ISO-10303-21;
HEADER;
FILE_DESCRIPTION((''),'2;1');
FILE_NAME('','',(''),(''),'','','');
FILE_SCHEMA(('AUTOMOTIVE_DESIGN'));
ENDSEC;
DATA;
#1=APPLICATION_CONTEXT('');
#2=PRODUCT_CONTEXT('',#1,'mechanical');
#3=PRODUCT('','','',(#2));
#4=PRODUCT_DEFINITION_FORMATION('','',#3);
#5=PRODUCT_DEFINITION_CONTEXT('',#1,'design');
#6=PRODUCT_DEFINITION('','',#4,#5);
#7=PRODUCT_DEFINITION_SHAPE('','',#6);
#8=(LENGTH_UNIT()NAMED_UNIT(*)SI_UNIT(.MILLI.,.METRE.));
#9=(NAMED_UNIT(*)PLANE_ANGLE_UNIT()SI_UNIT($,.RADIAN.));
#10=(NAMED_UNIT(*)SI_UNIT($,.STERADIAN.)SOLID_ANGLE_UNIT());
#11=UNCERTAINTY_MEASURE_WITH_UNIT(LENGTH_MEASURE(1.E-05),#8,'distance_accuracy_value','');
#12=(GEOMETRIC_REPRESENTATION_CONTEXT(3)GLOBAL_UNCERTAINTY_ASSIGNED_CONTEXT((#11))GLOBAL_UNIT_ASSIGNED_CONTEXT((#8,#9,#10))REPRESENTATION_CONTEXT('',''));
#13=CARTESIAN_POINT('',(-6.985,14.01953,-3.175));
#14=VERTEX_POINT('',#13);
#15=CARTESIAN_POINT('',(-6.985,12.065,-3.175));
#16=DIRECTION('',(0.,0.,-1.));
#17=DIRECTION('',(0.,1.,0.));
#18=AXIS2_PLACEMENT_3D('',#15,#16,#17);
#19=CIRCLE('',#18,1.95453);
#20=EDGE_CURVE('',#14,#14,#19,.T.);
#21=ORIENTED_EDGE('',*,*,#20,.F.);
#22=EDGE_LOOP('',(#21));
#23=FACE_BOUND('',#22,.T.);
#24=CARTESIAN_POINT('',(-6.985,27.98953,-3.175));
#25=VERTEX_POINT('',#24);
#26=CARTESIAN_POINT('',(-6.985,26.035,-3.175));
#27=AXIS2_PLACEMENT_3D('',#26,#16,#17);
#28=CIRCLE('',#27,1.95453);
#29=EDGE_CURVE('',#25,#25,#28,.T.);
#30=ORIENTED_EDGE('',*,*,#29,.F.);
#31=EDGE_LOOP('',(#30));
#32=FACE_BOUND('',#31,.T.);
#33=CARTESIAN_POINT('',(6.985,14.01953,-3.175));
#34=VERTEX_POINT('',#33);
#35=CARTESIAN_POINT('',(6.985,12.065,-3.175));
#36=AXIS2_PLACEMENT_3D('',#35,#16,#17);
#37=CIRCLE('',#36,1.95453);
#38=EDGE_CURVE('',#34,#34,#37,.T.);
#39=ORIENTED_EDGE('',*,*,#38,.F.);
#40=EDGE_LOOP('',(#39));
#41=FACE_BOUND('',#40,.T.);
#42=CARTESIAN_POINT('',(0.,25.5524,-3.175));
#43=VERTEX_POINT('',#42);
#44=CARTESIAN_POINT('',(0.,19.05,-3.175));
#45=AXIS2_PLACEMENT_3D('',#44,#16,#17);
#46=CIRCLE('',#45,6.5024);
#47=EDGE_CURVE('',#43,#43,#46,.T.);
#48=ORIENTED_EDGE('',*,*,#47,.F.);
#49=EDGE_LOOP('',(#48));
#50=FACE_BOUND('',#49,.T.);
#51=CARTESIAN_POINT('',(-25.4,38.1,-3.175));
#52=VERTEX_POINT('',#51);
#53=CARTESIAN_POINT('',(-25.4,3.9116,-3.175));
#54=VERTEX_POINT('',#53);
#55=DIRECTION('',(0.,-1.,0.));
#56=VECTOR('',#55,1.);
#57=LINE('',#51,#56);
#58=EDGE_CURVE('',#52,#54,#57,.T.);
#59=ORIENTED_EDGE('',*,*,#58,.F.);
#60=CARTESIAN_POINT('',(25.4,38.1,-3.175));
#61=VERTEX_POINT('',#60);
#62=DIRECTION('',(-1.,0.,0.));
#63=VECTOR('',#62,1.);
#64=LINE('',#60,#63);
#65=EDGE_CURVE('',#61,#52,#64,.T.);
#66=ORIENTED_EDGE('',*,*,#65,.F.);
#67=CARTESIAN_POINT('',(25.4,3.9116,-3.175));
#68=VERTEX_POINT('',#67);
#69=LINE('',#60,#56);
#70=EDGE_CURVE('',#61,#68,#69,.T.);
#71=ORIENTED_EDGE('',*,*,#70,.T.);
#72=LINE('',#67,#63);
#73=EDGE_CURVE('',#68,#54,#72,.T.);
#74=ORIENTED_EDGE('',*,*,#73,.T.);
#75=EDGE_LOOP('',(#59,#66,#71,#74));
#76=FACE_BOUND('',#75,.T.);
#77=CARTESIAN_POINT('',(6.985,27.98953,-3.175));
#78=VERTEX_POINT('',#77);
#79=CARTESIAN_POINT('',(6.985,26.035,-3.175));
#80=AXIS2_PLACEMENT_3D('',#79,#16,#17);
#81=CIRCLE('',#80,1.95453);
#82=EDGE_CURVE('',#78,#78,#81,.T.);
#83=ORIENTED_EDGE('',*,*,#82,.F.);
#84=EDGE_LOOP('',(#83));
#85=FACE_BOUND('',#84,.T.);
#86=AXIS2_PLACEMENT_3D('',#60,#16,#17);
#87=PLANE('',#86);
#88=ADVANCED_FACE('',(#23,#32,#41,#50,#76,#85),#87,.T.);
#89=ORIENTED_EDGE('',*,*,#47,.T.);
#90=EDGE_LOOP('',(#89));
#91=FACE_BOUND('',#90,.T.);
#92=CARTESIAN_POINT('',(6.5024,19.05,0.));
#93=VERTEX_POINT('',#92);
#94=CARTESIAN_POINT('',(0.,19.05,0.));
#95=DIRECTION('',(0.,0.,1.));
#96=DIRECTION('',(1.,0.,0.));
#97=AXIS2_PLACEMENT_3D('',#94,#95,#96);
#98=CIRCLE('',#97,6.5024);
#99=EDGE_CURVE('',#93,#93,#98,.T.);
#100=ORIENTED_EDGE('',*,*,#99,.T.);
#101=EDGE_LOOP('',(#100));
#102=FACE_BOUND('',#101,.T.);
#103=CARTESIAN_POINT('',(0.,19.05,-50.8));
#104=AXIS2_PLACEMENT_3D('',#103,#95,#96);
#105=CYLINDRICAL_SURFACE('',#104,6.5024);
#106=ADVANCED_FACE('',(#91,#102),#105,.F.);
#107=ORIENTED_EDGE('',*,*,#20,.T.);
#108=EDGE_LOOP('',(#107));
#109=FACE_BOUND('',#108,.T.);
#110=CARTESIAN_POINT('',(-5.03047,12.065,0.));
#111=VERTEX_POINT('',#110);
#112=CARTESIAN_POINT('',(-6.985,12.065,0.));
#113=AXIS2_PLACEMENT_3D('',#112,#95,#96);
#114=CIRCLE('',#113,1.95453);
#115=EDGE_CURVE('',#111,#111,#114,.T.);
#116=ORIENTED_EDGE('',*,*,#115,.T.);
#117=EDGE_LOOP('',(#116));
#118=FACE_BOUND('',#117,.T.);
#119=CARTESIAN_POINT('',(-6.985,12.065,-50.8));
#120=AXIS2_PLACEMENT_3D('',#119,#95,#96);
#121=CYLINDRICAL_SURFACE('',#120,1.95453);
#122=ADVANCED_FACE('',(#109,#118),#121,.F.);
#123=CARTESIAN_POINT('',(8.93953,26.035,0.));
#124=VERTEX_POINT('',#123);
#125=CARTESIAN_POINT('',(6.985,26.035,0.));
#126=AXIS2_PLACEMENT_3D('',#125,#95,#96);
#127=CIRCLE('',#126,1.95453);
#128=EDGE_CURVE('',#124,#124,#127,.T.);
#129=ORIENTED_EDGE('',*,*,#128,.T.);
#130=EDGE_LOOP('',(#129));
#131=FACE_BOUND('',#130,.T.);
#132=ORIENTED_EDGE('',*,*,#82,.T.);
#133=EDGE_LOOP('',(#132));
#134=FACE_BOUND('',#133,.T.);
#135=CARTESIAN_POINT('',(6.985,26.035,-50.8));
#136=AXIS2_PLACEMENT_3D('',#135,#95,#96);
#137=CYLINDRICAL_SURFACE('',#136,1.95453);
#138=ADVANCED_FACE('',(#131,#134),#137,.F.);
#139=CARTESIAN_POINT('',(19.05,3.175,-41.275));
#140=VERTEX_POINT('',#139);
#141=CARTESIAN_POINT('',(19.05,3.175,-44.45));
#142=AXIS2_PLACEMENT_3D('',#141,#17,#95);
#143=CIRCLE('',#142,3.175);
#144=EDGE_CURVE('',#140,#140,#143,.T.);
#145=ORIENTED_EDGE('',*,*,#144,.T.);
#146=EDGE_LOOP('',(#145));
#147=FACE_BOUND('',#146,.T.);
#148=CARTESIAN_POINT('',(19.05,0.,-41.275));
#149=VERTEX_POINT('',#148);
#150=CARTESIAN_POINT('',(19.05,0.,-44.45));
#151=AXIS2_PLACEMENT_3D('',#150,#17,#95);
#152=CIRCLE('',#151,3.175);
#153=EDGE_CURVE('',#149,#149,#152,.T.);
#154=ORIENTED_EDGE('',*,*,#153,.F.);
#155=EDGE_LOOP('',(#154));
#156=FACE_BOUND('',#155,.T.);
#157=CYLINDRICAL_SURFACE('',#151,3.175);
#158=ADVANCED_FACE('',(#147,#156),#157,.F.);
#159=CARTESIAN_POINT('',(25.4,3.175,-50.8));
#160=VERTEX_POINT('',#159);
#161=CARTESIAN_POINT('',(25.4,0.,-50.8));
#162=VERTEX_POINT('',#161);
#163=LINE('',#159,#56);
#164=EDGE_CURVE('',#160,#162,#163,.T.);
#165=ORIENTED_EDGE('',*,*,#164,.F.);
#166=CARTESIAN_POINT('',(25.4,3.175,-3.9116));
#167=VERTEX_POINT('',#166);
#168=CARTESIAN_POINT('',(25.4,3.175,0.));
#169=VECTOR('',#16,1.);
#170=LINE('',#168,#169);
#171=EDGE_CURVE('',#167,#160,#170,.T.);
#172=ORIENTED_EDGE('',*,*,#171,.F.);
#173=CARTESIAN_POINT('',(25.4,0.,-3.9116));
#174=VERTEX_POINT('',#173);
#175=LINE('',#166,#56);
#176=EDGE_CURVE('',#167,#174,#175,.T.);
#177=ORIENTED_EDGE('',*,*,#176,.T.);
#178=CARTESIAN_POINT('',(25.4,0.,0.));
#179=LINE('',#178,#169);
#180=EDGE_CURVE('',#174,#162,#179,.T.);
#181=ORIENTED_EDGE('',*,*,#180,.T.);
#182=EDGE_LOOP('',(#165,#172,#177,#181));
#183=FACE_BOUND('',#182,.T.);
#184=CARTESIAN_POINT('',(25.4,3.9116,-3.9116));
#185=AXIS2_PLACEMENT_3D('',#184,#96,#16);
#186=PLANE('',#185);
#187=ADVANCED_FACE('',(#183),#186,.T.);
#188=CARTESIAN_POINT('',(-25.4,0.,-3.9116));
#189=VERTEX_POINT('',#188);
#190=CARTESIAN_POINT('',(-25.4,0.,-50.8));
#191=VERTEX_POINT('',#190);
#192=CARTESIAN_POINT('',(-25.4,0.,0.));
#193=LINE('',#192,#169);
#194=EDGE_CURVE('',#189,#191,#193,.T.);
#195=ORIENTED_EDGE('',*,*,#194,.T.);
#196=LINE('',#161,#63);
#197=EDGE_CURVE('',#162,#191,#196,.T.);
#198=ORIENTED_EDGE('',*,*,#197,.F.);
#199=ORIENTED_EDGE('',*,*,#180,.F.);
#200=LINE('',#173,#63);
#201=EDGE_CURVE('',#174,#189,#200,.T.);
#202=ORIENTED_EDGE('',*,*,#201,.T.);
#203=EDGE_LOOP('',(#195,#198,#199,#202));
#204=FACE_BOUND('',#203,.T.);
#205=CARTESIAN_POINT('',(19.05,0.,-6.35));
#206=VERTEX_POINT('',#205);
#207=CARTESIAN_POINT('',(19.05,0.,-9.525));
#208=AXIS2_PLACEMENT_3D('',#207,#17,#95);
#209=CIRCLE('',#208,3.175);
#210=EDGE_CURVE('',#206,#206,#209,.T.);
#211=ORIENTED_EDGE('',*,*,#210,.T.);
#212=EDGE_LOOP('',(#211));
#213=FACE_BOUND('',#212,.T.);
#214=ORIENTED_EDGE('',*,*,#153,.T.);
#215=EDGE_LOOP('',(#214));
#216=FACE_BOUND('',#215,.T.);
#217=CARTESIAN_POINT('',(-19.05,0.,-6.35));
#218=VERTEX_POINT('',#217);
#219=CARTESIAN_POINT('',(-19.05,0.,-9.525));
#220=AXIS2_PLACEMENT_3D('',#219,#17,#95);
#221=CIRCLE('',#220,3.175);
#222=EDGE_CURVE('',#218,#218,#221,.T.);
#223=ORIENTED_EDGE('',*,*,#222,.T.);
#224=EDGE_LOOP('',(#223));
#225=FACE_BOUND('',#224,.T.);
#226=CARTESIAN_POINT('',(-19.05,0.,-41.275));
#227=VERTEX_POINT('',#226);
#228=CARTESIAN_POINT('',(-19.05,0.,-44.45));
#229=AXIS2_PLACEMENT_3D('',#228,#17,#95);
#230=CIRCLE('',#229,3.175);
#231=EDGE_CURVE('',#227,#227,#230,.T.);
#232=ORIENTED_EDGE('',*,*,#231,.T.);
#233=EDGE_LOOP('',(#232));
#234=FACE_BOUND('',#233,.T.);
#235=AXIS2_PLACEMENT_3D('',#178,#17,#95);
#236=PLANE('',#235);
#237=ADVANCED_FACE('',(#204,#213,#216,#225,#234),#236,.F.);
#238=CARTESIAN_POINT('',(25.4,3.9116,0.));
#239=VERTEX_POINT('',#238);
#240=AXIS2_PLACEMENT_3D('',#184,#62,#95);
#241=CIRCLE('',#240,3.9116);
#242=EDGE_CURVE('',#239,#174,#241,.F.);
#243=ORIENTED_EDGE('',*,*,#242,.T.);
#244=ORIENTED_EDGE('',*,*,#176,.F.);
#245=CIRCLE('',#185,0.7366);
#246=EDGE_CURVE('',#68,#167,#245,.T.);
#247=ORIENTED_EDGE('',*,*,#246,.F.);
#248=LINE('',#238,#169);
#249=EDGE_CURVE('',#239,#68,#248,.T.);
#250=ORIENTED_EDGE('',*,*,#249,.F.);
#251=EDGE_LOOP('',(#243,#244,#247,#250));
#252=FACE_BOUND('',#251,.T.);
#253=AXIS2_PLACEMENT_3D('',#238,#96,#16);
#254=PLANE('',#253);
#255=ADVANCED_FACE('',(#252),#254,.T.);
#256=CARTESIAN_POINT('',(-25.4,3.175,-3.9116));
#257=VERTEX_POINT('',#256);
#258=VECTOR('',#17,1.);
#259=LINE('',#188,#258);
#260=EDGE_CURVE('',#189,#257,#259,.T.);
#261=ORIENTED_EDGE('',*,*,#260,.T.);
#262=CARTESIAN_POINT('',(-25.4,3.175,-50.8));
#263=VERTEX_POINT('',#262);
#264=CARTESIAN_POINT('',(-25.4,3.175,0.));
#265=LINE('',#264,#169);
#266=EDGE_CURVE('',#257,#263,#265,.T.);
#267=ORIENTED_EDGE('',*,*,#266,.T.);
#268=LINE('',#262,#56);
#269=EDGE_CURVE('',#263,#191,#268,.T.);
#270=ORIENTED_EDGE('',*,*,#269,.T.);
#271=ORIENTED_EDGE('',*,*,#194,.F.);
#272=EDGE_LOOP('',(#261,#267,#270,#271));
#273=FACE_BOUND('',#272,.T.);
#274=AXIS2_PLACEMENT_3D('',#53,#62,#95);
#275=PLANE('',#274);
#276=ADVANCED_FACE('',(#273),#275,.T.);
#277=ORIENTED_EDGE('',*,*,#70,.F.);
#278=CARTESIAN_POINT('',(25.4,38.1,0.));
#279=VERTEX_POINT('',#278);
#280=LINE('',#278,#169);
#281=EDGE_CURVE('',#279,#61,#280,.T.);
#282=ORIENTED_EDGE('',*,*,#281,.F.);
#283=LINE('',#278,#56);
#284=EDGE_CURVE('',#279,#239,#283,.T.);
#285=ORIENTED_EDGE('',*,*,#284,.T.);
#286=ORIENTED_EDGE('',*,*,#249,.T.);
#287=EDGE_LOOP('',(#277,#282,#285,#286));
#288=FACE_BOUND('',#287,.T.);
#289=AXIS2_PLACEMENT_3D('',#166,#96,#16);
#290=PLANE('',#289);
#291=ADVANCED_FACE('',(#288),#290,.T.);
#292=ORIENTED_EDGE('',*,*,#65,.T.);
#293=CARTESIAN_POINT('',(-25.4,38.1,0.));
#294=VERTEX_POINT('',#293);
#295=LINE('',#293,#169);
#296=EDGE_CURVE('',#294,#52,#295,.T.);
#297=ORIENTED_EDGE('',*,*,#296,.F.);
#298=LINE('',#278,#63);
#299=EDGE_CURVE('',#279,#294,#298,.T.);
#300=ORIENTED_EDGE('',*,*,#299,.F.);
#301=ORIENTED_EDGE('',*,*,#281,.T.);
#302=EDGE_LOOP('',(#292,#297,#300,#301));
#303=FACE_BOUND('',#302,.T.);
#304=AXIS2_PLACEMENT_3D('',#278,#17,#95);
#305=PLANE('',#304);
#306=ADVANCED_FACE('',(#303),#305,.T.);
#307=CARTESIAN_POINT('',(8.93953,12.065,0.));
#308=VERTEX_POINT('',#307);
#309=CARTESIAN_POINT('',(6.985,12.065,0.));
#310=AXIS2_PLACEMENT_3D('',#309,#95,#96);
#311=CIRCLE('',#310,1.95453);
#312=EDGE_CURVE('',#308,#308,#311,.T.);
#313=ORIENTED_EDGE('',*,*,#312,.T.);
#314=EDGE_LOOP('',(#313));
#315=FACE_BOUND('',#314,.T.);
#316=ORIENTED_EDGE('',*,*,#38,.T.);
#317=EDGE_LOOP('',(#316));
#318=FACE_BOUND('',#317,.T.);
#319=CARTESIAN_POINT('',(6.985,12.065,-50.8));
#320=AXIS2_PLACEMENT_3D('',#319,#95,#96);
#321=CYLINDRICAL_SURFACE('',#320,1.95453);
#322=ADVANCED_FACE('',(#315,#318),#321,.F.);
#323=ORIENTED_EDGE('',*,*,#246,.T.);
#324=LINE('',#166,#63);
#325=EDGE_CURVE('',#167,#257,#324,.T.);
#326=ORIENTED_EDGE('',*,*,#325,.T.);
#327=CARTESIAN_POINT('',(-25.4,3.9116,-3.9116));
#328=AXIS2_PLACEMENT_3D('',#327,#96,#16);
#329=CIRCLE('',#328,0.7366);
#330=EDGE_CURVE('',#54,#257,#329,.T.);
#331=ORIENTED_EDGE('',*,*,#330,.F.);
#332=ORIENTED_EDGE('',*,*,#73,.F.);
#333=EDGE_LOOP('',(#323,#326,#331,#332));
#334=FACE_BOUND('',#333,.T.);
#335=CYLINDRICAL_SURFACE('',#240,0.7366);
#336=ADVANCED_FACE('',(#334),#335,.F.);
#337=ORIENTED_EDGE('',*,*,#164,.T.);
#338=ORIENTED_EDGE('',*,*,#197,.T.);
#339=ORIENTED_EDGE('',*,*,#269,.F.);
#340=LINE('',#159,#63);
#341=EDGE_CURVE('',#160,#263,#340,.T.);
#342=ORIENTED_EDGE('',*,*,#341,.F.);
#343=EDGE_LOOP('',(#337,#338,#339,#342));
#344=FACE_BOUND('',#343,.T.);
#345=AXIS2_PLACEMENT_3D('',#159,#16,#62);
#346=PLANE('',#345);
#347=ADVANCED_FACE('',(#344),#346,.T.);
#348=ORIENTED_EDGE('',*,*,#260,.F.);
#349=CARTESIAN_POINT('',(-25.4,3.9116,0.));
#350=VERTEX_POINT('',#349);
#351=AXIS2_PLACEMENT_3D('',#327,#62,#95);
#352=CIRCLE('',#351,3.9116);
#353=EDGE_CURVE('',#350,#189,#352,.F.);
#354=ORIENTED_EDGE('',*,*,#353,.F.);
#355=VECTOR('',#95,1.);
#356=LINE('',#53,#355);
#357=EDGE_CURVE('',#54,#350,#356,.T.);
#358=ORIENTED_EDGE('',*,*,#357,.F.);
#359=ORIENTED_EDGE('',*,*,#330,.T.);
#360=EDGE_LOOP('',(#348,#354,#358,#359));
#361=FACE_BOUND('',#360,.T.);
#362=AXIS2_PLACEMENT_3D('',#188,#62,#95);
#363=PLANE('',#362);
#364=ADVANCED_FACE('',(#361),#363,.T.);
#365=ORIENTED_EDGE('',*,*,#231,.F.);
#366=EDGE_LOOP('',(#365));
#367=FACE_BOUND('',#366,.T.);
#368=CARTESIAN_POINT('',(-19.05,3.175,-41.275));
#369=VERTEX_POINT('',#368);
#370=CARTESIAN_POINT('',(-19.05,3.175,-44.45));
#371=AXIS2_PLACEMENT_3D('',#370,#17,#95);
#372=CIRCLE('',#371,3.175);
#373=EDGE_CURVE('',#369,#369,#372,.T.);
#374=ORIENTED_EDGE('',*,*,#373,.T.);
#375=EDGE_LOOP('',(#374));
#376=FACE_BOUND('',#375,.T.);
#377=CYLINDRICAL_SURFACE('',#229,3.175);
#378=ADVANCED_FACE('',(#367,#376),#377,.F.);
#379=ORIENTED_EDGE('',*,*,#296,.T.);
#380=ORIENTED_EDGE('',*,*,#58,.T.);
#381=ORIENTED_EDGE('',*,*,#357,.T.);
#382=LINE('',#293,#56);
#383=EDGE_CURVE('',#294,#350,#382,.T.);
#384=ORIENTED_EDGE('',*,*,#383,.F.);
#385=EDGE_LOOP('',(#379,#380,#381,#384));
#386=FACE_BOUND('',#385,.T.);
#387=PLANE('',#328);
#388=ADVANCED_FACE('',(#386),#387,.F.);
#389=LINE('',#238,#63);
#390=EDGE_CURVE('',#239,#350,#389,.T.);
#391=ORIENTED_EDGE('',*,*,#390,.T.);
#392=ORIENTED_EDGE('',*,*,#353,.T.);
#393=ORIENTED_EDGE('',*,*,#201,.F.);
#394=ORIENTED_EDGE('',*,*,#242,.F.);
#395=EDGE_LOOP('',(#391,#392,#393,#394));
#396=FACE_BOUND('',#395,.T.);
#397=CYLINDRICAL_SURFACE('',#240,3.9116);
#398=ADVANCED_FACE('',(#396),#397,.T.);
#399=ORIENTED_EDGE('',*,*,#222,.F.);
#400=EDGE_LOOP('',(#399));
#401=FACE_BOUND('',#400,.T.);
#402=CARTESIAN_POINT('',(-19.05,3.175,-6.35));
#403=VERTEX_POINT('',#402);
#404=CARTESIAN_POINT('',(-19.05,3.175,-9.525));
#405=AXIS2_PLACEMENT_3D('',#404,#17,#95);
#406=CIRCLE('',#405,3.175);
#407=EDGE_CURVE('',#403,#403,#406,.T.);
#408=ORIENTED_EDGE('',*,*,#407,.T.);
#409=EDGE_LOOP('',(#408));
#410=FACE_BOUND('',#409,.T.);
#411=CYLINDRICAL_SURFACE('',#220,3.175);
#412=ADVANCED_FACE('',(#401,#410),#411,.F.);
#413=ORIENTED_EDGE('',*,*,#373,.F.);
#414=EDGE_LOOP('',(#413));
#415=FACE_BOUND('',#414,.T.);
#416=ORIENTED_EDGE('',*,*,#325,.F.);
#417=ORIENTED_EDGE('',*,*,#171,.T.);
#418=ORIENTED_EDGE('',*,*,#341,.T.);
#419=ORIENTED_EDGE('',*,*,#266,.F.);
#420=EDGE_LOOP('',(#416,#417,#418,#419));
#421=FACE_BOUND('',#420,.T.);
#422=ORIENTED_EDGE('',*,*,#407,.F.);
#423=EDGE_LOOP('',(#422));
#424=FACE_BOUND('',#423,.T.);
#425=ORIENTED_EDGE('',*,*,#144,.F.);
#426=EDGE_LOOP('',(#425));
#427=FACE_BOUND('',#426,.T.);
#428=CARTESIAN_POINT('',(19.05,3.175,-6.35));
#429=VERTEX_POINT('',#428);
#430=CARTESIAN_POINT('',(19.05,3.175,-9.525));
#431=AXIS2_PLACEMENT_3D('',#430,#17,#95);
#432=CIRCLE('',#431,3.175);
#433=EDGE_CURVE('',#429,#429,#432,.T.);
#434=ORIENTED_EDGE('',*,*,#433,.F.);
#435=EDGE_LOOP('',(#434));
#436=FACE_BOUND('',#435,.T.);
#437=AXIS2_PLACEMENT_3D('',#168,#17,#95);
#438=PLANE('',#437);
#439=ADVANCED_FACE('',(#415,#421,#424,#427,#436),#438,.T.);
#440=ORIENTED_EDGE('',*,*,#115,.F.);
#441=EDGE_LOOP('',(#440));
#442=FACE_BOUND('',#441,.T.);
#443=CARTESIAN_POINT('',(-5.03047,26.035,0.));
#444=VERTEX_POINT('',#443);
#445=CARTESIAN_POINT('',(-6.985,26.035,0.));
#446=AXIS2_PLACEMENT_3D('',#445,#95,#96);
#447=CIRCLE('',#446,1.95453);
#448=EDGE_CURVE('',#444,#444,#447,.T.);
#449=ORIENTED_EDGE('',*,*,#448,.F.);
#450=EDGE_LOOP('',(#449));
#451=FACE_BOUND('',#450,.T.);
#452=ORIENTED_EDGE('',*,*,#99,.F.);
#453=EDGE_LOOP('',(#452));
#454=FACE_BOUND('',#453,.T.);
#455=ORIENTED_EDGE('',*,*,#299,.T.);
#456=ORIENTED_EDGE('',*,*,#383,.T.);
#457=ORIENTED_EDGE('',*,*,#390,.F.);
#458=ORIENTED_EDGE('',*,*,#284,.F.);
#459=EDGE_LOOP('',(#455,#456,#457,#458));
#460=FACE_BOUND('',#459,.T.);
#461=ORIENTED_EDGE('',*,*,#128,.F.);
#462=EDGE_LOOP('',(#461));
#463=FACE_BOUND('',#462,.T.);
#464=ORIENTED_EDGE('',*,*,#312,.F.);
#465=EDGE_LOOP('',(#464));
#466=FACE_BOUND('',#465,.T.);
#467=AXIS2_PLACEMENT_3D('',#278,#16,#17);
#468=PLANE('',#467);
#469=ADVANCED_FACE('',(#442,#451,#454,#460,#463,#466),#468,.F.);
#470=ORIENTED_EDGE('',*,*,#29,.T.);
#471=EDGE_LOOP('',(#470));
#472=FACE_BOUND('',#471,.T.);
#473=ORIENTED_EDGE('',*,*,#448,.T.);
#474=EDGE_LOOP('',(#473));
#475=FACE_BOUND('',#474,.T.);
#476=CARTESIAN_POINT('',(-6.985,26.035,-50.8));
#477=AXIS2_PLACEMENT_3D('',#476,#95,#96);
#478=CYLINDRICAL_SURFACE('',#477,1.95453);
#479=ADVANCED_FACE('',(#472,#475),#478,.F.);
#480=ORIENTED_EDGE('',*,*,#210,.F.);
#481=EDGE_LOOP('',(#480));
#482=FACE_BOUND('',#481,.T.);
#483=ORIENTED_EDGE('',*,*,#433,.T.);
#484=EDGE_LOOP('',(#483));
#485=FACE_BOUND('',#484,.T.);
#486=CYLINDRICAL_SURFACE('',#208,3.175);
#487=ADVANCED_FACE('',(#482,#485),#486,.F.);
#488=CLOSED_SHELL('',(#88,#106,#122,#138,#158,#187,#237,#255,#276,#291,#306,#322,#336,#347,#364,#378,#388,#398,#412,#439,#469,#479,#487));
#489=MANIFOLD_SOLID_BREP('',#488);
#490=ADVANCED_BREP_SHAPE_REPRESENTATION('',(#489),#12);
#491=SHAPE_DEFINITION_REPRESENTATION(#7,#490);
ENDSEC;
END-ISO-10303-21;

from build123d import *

# Parameters (mm, degrees)
BASE_FLANGE1_DEPTH = 25.4
SKETCH6_R          = 6.5024
SKETCH6_R_2        = 1.95453
CUT_EXTRUDE1_DEPTH = 69.391593051
SKETCH7_R          = 3.175
CUT_EXTRUDE2_DEPTH = 67.675


# Sheet-metal steps are written as plain solids
with BuildPart() as part:
    # Sketch1 → Base-Flange1 (new, symmetric)
    with BuildSketch(Plane(origin=(0, 0, 0), x_dir=(0, 0, -1), z_dir=(1, 0, 0))):
        with BuildLine():
            Line((0, 38.1), (0, 3.9116))
            ThreePointArc((0, 3.9116), (1.145681115, 1.145681115), (3.9116, 0))
            Line((3.9116, 0), (50.8, 0))
            Line((50.8, 0), (50.8, 3.175))
            Line((50.8, 3.175), (3.9116, 3.175))
            ThreePointArc((3.9116, 3.175), (3.390745145, 3.390745145), (3.175, 3.9116))
            Line((3.175, 3.9116), (3.175, 38.1))
            Line((3.175, 38.1), (0, 38.1))
        make_face()
    extrude(amount=BASE_FLANGE1_DEPTH, both=True)

    # Sketch6 → Cut-Extrude1 (cut, through all)
    with BuildSketch(Plane.XY):
        with Locations((0, 19.05)):
            Circle(SKETCH6_R)
        with Locations((-6.985, 26.035)):
            Circle(SKETCH6_R_2)
        with Locations((6.985, 26.035)):
            Circle(SKETCH6_R_2)
        with Locations((6.985, 12.065)):
            Circle(SKETCH6_R_2)
        with Locations((-6.985, 12.065)):
            Circle(SKETCH6_R_2)
    extrude(amount=-CUT_EXTRUDE1_DEPTH, mode=Mode.SUBTRACT)

    # Sketch7 → Cut-Extrude2 (cut, through all)
    with BuildSketch(Plane(origin=(0, 3.175, 0), x_dir=(1, 0, 0), z_dir=(0, 1, 0))):
        with Locations(Location((-19.05, 44.45, 0), (0, 0, 270))):
            Circle(SKETCH7_R)
        with Locations(Location((-19.05, 9.525, 0), (0, 0, 270))):
            Circle(SKETCH7_R)
        with Locations(Location((19.05, 44.45, 0), (0, 0, 270))):
            Circle(SKETCH7_R)
        with Locations(Location((19.05, 9.525, 0), (0, 0, 270))):
            Circle(SKETCH7_R)
    extrude(amount=-CUT_EXTRUDE2_DEPTH, mode=Mode.SUBTRACT)


solid = part.part
